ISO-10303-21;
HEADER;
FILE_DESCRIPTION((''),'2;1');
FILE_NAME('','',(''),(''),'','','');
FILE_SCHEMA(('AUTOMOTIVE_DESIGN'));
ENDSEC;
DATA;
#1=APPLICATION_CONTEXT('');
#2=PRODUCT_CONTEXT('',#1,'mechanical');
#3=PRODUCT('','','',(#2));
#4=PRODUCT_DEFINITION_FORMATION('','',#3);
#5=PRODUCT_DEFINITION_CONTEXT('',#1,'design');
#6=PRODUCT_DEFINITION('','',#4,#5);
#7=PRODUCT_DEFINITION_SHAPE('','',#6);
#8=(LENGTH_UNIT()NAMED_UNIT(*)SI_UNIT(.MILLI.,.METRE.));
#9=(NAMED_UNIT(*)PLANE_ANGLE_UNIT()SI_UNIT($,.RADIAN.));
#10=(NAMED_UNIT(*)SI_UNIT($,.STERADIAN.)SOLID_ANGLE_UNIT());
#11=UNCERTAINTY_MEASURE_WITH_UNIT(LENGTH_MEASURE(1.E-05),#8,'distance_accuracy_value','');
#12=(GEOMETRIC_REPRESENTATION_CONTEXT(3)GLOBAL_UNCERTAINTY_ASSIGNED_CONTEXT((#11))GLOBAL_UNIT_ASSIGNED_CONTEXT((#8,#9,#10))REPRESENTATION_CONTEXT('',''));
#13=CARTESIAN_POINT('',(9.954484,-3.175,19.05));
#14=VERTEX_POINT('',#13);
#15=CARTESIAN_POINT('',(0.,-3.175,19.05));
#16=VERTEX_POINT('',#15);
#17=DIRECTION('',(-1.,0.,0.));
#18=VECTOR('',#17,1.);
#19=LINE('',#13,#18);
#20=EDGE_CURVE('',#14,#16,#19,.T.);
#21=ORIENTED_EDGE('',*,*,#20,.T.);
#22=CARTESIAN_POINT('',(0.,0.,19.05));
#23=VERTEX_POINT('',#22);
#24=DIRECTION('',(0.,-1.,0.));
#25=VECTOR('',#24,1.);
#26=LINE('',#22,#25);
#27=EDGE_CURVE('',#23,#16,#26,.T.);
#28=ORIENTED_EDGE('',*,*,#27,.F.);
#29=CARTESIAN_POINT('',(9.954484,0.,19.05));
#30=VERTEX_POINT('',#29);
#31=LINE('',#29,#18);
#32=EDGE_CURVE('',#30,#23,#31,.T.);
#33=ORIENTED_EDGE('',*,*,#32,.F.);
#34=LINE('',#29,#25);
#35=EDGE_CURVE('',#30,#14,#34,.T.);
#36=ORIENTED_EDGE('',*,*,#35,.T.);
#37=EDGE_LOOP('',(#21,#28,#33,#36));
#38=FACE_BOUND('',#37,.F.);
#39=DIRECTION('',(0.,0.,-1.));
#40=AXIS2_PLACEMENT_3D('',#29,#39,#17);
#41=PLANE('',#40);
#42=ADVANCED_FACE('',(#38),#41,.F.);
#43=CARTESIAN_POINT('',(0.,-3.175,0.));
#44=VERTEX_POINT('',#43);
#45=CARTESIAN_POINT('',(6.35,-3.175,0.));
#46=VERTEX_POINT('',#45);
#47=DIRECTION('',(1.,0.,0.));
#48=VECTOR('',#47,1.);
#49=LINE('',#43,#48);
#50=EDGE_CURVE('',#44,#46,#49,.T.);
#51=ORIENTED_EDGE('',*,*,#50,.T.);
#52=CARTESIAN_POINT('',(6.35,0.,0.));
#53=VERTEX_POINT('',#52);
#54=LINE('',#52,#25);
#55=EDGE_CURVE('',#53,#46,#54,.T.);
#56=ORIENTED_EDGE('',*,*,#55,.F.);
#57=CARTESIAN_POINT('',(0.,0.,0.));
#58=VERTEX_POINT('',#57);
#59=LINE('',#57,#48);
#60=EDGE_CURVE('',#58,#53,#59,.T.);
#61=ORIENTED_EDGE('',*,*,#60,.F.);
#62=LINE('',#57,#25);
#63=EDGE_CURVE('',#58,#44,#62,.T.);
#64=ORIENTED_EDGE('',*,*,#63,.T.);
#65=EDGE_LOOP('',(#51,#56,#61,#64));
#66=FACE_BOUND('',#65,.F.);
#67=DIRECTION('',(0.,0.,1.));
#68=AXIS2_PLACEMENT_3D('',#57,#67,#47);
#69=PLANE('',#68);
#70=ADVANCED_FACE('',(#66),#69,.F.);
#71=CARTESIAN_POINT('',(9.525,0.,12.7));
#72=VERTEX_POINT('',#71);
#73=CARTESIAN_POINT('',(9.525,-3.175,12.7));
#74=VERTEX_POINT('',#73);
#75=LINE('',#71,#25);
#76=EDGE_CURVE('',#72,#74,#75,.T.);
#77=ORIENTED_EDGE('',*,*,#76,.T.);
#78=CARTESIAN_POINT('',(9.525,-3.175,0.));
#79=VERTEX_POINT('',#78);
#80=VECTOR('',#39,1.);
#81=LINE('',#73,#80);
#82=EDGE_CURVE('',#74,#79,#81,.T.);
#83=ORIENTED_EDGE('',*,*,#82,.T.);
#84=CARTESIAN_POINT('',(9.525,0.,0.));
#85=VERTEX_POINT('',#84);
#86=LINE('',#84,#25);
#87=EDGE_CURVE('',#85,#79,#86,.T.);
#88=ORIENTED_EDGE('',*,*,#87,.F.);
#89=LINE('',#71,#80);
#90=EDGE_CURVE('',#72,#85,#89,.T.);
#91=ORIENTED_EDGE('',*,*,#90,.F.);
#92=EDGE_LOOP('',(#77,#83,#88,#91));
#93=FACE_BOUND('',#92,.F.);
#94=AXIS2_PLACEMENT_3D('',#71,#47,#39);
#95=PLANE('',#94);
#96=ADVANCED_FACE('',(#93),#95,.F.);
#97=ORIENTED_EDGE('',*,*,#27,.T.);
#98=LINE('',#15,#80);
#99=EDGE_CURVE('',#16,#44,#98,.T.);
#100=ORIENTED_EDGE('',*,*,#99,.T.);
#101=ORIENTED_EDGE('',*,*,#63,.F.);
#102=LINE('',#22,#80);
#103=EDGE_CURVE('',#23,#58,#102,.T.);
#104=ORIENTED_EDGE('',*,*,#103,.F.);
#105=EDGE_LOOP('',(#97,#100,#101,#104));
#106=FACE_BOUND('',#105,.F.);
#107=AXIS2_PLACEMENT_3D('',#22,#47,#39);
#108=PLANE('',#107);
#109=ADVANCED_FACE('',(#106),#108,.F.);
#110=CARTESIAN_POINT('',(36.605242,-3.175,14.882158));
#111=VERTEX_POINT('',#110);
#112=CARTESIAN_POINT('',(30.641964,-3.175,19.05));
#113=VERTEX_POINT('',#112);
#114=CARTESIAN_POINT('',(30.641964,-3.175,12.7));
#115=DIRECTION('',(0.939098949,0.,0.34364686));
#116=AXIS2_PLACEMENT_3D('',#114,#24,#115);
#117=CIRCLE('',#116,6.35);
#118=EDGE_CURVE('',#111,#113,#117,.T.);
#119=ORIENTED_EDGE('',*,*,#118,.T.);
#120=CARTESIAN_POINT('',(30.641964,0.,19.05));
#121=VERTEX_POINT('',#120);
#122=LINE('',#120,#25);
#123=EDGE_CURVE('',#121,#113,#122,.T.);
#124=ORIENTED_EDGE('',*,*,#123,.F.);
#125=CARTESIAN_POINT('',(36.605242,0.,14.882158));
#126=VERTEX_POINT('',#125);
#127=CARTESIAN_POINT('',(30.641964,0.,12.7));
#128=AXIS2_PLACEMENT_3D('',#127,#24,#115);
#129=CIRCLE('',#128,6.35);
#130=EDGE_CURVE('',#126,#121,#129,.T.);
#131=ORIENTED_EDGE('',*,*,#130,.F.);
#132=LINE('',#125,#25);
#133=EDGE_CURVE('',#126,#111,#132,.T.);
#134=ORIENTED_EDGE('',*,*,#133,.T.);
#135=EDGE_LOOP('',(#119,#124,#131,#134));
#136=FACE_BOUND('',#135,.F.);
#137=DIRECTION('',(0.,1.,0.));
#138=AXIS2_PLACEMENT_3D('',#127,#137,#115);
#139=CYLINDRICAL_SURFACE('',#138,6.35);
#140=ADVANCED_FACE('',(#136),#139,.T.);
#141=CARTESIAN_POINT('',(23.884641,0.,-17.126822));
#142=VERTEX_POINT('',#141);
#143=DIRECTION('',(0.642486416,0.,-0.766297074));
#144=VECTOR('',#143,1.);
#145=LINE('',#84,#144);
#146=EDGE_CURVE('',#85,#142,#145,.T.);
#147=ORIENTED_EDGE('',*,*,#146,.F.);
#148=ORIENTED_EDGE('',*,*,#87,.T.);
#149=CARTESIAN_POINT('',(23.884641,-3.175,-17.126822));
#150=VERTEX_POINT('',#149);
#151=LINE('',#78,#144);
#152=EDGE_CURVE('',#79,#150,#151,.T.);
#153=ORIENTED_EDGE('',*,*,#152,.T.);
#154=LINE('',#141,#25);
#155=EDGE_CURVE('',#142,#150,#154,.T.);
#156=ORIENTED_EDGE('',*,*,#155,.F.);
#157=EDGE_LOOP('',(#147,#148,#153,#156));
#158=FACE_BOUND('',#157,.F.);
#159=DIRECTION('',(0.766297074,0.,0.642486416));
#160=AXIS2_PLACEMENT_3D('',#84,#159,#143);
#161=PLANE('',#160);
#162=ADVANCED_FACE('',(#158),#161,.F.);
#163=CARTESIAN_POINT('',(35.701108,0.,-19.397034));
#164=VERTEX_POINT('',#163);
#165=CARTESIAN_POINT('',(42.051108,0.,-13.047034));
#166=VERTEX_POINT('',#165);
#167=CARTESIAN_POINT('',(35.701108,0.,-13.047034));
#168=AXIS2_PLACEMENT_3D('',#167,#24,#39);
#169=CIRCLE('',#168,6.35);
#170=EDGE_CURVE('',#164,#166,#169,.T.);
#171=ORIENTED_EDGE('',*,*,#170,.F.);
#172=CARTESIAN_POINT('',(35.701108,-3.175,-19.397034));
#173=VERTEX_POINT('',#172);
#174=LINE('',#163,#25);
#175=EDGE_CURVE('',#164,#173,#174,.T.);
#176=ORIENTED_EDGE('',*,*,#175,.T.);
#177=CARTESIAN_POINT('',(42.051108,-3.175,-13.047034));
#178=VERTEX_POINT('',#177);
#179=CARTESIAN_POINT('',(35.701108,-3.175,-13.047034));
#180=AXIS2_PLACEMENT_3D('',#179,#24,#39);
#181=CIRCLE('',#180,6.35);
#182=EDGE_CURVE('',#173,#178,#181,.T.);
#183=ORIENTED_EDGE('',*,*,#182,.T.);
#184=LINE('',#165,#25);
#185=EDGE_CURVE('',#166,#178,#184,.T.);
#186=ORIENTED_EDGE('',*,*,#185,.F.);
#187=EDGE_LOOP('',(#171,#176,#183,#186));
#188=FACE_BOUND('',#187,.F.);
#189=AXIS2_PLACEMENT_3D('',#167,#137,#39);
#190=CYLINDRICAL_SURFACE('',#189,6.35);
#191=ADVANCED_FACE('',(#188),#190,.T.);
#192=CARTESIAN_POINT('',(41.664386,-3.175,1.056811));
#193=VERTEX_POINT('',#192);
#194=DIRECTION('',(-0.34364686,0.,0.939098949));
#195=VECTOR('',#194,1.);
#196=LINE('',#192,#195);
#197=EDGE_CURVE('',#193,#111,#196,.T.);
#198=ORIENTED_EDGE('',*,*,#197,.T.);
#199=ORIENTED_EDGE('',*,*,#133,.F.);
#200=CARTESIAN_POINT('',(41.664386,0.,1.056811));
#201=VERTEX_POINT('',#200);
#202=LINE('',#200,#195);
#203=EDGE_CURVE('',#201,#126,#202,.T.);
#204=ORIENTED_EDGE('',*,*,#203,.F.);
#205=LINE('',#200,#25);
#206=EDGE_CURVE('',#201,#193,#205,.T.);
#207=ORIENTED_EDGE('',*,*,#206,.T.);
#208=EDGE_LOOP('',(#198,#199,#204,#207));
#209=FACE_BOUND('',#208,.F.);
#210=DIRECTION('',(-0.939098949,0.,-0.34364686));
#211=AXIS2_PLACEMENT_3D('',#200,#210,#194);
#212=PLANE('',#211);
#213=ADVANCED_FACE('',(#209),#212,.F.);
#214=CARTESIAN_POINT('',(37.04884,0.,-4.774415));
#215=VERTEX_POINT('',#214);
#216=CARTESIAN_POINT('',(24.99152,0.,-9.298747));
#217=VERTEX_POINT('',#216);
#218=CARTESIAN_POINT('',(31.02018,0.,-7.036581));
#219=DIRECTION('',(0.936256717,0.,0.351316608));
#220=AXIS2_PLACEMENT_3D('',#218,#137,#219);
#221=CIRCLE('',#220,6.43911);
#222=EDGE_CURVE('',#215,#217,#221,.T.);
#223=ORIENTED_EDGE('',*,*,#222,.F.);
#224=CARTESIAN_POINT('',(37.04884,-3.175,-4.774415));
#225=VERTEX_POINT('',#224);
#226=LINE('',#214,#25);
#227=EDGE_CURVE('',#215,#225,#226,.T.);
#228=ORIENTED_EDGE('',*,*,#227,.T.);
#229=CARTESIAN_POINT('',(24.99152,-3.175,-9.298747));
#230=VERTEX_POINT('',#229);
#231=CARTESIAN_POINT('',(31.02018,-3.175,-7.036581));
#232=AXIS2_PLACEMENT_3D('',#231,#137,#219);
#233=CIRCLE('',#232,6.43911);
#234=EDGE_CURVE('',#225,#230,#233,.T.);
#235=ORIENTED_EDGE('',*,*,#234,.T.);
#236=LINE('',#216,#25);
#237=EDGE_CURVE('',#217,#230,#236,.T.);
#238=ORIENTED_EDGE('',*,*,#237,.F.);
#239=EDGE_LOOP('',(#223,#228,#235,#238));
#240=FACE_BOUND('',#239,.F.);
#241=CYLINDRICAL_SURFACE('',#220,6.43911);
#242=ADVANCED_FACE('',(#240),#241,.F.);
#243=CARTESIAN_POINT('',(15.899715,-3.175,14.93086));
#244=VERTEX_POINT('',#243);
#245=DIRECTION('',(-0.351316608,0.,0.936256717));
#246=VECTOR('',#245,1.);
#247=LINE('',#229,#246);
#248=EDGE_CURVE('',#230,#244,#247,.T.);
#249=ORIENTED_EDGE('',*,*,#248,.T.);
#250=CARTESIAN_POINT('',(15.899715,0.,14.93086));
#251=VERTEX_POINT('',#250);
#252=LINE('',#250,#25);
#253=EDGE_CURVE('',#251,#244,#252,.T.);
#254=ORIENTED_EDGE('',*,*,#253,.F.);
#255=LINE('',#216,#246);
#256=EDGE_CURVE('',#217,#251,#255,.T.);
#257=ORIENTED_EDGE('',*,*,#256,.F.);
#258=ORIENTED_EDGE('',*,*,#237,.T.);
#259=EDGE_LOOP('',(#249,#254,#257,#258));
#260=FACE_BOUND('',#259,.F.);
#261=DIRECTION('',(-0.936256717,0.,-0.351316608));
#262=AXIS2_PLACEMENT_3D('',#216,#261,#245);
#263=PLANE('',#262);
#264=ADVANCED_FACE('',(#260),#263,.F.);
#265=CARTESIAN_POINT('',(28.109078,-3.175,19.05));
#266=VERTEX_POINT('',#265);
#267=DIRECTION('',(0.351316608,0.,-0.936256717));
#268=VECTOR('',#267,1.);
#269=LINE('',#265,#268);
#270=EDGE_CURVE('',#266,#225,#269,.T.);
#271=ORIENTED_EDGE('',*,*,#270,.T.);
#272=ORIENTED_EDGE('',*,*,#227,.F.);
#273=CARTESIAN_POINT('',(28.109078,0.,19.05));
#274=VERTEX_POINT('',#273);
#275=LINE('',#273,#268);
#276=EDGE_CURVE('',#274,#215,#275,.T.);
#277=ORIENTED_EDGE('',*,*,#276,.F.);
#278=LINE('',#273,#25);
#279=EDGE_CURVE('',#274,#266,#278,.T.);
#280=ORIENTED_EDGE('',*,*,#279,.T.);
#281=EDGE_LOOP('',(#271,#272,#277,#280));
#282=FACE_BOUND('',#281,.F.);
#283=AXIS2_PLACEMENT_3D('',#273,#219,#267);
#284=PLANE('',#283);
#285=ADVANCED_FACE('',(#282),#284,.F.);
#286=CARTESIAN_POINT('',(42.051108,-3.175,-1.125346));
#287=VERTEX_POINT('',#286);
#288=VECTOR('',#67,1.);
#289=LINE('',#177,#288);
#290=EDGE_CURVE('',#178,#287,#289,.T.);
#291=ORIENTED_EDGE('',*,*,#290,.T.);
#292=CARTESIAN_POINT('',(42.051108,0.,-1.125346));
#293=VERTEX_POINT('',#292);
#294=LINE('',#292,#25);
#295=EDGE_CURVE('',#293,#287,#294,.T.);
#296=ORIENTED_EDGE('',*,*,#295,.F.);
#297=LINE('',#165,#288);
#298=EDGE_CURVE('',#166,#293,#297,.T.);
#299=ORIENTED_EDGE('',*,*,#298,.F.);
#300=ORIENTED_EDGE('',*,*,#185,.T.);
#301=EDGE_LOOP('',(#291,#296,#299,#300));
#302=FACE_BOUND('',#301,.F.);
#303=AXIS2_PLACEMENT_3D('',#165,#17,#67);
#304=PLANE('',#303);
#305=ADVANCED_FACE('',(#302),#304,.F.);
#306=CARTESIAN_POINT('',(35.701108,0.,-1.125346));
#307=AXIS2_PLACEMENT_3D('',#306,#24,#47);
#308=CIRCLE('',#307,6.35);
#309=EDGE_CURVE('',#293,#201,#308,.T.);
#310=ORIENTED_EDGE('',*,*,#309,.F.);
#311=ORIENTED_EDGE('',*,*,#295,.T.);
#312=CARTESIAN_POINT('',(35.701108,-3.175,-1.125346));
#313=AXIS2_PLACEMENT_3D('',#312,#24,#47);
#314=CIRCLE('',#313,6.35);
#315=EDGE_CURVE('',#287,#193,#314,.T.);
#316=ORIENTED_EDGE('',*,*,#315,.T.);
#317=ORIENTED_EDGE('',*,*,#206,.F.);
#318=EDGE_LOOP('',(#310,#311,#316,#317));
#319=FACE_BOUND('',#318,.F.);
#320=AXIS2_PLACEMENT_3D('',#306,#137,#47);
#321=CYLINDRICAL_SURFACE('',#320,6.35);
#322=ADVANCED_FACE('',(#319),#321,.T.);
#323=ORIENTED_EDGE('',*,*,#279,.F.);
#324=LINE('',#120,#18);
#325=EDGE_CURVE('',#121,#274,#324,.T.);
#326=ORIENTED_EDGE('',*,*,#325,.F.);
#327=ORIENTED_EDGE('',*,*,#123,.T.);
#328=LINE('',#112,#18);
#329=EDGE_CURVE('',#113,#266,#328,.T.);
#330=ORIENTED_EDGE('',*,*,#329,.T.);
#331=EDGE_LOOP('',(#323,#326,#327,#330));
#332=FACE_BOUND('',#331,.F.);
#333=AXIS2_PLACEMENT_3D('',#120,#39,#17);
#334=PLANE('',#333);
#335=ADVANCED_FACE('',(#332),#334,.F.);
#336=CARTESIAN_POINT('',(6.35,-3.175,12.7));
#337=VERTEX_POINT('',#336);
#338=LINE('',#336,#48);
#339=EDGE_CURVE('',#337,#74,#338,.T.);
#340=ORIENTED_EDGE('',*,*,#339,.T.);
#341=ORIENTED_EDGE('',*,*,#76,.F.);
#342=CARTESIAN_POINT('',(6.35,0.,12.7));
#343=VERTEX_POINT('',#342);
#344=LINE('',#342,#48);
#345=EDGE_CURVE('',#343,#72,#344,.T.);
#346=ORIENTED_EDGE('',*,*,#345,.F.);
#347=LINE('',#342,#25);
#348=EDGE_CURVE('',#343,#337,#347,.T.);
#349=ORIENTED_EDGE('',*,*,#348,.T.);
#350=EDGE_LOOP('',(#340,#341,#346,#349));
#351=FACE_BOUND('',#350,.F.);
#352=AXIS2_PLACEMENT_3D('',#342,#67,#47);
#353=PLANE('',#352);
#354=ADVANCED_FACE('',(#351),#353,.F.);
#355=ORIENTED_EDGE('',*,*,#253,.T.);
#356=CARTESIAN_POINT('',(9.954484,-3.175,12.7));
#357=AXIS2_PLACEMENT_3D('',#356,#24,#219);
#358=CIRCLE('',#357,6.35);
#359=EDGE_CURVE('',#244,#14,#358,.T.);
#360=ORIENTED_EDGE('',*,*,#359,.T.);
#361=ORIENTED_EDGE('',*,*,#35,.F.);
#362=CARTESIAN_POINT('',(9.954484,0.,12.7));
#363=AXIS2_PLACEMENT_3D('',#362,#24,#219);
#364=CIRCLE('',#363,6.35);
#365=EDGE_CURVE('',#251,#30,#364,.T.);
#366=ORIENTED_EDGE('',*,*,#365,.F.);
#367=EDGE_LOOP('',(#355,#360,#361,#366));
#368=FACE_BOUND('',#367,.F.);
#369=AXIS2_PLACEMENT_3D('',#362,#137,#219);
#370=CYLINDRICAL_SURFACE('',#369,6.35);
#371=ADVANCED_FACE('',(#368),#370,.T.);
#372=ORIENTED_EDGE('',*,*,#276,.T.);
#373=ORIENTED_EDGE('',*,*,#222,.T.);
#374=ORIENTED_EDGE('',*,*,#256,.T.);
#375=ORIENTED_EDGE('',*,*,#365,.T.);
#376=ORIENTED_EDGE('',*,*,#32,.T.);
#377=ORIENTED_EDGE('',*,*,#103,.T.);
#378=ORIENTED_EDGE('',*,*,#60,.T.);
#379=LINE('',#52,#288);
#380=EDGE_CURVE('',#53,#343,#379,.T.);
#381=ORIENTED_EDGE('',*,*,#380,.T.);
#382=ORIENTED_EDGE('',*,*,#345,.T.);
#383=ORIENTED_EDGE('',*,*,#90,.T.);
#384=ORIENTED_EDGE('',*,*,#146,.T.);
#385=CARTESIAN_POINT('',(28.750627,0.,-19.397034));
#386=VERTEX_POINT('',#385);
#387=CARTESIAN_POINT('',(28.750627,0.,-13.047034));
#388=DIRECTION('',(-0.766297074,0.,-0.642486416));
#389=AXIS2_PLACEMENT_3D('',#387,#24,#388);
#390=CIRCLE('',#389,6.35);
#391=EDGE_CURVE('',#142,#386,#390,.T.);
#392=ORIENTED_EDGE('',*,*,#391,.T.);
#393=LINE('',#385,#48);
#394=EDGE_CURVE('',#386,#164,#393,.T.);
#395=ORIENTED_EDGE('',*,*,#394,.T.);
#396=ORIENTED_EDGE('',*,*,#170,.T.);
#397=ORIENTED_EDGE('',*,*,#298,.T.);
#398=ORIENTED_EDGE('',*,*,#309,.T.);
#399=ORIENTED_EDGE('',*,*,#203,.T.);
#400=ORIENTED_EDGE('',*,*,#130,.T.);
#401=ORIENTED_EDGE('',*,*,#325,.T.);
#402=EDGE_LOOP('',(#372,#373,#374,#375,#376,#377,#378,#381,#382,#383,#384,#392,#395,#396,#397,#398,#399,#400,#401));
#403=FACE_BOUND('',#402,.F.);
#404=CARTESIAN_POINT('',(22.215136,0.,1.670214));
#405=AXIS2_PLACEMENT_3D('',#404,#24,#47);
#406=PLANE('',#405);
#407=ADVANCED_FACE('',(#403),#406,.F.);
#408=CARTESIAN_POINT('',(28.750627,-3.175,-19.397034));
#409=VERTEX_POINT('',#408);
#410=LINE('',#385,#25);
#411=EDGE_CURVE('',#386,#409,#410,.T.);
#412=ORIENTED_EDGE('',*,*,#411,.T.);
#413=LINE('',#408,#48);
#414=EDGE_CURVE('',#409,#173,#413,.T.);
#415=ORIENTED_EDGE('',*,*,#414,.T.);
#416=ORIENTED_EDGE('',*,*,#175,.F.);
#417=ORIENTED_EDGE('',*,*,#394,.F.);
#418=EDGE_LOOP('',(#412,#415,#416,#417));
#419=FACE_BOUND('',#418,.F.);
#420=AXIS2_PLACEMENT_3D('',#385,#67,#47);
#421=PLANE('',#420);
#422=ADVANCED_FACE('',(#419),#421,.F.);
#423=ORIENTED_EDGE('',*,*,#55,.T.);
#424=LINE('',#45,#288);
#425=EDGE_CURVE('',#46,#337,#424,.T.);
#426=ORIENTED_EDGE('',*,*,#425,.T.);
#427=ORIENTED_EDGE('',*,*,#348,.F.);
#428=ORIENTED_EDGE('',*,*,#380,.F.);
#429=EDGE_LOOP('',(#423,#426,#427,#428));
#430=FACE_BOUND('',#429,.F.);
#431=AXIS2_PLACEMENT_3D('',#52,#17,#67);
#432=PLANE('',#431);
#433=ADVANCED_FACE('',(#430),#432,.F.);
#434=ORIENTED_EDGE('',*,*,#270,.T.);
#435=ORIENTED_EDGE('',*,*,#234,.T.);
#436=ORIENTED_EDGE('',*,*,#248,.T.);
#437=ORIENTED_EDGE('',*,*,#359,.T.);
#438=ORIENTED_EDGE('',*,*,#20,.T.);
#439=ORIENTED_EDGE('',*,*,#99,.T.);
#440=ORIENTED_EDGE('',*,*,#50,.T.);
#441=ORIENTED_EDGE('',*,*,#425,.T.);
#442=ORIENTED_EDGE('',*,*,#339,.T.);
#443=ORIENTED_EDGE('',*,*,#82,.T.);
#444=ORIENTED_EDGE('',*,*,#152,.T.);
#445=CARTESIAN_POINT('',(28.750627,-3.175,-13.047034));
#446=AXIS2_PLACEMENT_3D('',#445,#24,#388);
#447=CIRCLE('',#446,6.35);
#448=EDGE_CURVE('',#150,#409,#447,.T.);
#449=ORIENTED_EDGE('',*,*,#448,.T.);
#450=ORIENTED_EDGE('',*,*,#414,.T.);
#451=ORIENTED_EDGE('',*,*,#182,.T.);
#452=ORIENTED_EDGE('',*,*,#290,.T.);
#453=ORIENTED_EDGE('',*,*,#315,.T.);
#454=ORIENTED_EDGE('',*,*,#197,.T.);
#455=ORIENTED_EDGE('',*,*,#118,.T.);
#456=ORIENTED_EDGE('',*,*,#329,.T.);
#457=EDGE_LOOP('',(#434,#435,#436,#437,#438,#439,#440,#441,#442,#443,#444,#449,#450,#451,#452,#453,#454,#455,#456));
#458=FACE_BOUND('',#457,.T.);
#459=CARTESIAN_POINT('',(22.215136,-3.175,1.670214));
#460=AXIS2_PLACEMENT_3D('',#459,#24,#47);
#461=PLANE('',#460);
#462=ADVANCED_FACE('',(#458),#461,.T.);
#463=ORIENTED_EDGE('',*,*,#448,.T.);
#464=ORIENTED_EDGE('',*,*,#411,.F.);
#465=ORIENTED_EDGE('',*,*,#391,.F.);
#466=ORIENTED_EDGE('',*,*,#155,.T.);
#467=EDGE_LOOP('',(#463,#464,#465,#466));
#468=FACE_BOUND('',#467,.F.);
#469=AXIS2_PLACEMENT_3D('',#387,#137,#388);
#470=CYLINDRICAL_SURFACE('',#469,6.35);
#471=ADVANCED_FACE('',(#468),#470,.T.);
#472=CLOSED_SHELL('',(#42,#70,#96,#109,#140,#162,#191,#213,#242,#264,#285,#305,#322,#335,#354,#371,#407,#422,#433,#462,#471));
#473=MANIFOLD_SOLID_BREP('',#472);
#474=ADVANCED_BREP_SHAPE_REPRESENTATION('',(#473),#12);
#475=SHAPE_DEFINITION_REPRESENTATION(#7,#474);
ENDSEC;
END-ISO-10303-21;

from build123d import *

# Parameters (mm, degrees)
F1_DEPTH = 3.175


# Not quite as in the source:
# - a length typed as a fraction of an inch, garbled in the dataset ("3 / 203.2 mm" for 3/8 in), is restored


with BuildPart() as f1:
    # F0 (on Front) → F1 (new body)
    with BuildSketch(Plane.XZ):
        with BuildLine():
            Line((0, 19.05), (0, 0))
            Line((0, 0), (6.35, 0))
            Line((6.35, 0), (6.35, 12.7))
            Line((6.35, 12.7), (9.525, 12.7))
            Line((9.525, 12.7), (9.525, 0))
            Line((9.525, 0), (23.8846407704, -17.1268223527))
            ThreePointArc((23.8846407704, -17.1268223527), (26.0658700781, -18.8015604613), (28.7506271903, -19.3970336129))
            Line((28.7506271903, -19.3970336129), (35.7011077573, -19.3970336129))
            ThreePointArc((35.7011077573, -19.3970336129), (40.1912358178, -17.5371616734), (42.0511077573, -13.0470336129))
            Line((42.0511077573, -13.0470336129), (42.0511077573, -1.1253461624))
            ThreePointArc((42.0511077573, -1.1253461624), (41.9536799226, -0.017266148), (41.6643860823, 1.0568113981))
            Line((41.6643860823, 1.0568113981), (36.6052420996, 14.8821575605))
            ThreePointArc((36.6052420996, 14.8821575605), (34.2796690603, 17.9047670702), (30.6419637747, 19.05))
            Line((30.6419637747, 19.05), (28.1090781347, 19.05))
            Line((28.1090781347, 19.05), (37.0488404527, -4.7744145618))
            ThreePointArc((37.0488404527, -4.7744145618), (33.2823465228, -13.0652413354), (24.9915197492, -9.2987474054))
            Line((24.9915197492, -9.2987474054), (15.8997145825, 14.9308604634))
            ThreePointArc((15.8997145825, 14.9308604634), (13.5708732383, 17.9196007483), (9.9544844278, 19.05))
            Line((9.9544844278, 19.05), (0, 19.05))
        make_face()
    extrude(amount=F1_DEPTH)


solid = f1.part
